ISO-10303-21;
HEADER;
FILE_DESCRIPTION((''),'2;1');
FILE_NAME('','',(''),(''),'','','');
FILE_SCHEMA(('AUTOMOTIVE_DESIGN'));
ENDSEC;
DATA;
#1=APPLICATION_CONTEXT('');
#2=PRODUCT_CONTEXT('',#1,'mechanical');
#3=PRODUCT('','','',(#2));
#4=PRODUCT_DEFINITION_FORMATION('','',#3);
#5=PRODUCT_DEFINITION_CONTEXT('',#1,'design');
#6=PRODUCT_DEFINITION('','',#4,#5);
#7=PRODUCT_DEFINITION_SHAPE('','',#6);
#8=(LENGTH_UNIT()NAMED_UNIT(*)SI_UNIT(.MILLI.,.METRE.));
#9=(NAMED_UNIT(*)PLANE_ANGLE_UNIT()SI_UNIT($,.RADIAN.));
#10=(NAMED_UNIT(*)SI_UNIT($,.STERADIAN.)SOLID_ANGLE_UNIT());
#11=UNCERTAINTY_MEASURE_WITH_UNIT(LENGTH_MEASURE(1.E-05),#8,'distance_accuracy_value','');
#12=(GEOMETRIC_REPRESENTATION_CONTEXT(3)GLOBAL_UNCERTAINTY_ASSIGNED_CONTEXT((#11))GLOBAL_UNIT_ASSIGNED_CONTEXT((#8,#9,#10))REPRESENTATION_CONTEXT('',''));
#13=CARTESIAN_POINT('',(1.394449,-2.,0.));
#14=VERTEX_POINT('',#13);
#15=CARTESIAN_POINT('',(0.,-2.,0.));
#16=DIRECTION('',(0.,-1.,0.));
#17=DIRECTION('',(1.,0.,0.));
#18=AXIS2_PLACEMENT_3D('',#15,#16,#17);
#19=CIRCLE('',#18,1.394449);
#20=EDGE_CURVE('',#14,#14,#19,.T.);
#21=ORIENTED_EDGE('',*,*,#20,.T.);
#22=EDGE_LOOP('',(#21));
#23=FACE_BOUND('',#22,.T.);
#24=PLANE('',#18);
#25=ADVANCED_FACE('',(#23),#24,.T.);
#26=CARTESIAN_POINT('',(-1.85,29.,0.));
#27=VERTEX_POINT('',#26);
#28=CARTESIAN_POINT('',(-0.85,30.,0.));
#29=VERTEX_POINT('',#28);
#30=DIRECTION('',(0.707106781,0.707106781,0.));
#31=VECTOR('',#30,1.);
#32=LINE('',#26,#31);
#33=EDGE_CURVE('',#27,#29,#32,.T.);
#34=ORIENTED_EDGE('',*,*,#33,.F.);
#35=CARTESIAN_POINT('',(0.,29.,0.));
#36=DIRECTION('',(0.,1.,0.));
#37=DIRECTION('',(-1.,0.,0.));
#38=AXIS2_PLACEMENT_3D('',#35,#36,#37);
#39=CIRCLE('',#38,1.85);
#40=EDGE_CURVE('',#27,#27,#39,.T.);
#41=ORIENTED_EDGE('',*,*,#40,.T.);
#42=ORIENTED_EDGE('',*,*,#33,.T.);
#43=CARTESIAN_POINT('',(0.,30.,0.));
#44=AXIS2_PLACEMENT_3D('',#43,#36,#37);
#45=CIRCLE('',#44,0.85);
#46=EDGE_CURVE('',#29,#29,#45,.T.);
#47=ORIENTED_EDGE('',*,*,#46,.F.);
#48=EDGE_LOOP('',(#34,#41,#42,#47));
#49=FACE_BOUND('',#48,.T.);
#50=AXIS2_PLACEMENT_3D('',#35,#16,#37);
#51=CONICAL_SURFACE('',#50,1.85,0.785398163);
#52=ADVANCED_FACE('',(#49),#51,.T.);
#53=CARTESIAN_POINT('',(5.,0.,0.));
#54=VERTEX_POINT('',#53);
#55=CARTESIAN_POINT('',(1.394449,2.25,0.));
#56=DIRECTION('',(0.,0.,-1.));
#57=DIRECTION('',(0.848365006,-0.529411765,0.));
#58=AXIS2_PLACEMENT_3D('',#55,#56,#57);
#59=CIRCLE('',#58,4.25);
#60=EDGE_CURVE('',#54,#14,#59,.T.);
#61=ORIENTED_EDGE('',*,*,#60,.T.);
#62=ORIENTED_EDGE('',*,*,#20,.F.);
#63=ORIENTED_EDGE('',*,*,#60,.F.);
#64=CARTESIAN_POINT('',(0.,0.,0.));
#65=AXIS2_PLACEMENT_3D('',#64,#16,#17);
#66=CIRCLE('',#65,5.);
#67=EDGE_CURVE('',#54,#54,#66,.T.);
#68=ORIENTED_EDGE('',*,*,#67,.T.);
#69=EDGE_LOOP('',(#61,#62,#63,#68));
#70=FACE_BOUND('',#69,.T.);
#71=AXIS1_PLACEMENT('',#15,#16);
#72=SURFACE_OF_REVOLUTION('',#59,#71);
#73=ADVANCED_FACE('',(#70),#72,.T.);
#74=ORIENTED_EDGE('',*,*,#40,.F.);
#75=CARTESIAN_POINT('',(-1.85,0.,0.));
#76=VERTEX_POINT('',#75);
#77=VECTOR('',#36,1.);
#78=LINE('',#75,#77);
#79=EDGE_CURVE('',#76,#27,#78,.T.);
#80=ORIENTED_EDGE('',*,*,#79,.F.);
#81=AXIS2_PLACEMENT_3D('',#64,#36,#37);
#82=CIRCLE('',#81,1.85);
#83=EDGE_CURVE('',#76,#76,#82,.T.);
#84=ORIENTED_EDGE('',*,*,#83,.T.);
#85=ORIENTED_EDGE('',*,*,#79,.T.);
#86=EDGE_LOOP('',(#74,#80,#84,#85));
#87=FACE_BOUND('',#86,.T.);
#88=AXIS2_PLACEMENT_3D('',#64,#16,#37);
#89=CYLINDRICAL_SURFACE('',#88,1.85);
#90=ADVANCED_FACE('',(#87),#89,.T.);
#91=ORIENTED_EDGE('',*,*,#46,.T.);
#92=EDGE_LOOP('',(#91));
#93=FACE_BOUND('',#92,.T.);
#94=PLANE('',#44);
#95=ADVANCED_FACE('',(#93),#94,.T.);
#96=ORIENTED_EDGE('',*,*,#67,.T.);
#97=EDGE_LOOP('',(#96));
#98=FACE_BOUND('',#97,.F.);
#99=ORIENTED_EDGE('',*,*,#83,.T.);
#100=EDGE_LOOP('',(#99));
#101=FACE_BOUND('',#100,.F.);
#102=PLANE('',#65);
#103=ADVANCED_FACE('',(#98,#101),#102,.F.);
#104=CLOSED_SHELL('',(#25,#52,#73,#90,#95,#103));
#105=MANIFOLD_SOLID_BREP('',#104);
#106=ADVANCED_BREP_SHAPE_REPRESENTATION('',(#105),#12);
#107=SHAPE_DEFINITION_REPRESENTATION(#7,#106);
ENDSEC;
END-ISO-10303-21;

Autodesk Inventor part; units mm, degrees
ref_plane "YZ Plane" through (0, 0, 0) normal (1, 0, 0) x (0, 1, 0)
ref_plane "XZ Plane" through (0, 0, 0) normal (0, 1, 0) x (-1, 0, 0)
ref_plane "XY Plane" through (0, 0, 0) normal (0, 0, 1) x (1, 0, 0)
sketch "Sketch1" plane through (0, 0, 0) normal (0, 1, 0) x (-1, 0, 0)
  circle A0 centre (0, 0) radius 1.85
  dimension "d0" = 3.7
extrude "Extrusion1" add sketch "Sketch1" along normal blind 30
sketch "Sketch2" plane through (0, 0, 0) normal (0, -1, 0) x (1, 0, 0)
  circle A0 centre (0, 0) radius 5
  dimension "d3" = 10
extrude "Extrusion2" add sketch "Sketch2" along normal blind 2
chamfer "Chamfer1" distance 1 angle 45 1 edges at (1.85, 30, 0)
fillet "Fillet1" radius 4.25 1 edges at (-5, -2, 0)
properties part number "Pin"
